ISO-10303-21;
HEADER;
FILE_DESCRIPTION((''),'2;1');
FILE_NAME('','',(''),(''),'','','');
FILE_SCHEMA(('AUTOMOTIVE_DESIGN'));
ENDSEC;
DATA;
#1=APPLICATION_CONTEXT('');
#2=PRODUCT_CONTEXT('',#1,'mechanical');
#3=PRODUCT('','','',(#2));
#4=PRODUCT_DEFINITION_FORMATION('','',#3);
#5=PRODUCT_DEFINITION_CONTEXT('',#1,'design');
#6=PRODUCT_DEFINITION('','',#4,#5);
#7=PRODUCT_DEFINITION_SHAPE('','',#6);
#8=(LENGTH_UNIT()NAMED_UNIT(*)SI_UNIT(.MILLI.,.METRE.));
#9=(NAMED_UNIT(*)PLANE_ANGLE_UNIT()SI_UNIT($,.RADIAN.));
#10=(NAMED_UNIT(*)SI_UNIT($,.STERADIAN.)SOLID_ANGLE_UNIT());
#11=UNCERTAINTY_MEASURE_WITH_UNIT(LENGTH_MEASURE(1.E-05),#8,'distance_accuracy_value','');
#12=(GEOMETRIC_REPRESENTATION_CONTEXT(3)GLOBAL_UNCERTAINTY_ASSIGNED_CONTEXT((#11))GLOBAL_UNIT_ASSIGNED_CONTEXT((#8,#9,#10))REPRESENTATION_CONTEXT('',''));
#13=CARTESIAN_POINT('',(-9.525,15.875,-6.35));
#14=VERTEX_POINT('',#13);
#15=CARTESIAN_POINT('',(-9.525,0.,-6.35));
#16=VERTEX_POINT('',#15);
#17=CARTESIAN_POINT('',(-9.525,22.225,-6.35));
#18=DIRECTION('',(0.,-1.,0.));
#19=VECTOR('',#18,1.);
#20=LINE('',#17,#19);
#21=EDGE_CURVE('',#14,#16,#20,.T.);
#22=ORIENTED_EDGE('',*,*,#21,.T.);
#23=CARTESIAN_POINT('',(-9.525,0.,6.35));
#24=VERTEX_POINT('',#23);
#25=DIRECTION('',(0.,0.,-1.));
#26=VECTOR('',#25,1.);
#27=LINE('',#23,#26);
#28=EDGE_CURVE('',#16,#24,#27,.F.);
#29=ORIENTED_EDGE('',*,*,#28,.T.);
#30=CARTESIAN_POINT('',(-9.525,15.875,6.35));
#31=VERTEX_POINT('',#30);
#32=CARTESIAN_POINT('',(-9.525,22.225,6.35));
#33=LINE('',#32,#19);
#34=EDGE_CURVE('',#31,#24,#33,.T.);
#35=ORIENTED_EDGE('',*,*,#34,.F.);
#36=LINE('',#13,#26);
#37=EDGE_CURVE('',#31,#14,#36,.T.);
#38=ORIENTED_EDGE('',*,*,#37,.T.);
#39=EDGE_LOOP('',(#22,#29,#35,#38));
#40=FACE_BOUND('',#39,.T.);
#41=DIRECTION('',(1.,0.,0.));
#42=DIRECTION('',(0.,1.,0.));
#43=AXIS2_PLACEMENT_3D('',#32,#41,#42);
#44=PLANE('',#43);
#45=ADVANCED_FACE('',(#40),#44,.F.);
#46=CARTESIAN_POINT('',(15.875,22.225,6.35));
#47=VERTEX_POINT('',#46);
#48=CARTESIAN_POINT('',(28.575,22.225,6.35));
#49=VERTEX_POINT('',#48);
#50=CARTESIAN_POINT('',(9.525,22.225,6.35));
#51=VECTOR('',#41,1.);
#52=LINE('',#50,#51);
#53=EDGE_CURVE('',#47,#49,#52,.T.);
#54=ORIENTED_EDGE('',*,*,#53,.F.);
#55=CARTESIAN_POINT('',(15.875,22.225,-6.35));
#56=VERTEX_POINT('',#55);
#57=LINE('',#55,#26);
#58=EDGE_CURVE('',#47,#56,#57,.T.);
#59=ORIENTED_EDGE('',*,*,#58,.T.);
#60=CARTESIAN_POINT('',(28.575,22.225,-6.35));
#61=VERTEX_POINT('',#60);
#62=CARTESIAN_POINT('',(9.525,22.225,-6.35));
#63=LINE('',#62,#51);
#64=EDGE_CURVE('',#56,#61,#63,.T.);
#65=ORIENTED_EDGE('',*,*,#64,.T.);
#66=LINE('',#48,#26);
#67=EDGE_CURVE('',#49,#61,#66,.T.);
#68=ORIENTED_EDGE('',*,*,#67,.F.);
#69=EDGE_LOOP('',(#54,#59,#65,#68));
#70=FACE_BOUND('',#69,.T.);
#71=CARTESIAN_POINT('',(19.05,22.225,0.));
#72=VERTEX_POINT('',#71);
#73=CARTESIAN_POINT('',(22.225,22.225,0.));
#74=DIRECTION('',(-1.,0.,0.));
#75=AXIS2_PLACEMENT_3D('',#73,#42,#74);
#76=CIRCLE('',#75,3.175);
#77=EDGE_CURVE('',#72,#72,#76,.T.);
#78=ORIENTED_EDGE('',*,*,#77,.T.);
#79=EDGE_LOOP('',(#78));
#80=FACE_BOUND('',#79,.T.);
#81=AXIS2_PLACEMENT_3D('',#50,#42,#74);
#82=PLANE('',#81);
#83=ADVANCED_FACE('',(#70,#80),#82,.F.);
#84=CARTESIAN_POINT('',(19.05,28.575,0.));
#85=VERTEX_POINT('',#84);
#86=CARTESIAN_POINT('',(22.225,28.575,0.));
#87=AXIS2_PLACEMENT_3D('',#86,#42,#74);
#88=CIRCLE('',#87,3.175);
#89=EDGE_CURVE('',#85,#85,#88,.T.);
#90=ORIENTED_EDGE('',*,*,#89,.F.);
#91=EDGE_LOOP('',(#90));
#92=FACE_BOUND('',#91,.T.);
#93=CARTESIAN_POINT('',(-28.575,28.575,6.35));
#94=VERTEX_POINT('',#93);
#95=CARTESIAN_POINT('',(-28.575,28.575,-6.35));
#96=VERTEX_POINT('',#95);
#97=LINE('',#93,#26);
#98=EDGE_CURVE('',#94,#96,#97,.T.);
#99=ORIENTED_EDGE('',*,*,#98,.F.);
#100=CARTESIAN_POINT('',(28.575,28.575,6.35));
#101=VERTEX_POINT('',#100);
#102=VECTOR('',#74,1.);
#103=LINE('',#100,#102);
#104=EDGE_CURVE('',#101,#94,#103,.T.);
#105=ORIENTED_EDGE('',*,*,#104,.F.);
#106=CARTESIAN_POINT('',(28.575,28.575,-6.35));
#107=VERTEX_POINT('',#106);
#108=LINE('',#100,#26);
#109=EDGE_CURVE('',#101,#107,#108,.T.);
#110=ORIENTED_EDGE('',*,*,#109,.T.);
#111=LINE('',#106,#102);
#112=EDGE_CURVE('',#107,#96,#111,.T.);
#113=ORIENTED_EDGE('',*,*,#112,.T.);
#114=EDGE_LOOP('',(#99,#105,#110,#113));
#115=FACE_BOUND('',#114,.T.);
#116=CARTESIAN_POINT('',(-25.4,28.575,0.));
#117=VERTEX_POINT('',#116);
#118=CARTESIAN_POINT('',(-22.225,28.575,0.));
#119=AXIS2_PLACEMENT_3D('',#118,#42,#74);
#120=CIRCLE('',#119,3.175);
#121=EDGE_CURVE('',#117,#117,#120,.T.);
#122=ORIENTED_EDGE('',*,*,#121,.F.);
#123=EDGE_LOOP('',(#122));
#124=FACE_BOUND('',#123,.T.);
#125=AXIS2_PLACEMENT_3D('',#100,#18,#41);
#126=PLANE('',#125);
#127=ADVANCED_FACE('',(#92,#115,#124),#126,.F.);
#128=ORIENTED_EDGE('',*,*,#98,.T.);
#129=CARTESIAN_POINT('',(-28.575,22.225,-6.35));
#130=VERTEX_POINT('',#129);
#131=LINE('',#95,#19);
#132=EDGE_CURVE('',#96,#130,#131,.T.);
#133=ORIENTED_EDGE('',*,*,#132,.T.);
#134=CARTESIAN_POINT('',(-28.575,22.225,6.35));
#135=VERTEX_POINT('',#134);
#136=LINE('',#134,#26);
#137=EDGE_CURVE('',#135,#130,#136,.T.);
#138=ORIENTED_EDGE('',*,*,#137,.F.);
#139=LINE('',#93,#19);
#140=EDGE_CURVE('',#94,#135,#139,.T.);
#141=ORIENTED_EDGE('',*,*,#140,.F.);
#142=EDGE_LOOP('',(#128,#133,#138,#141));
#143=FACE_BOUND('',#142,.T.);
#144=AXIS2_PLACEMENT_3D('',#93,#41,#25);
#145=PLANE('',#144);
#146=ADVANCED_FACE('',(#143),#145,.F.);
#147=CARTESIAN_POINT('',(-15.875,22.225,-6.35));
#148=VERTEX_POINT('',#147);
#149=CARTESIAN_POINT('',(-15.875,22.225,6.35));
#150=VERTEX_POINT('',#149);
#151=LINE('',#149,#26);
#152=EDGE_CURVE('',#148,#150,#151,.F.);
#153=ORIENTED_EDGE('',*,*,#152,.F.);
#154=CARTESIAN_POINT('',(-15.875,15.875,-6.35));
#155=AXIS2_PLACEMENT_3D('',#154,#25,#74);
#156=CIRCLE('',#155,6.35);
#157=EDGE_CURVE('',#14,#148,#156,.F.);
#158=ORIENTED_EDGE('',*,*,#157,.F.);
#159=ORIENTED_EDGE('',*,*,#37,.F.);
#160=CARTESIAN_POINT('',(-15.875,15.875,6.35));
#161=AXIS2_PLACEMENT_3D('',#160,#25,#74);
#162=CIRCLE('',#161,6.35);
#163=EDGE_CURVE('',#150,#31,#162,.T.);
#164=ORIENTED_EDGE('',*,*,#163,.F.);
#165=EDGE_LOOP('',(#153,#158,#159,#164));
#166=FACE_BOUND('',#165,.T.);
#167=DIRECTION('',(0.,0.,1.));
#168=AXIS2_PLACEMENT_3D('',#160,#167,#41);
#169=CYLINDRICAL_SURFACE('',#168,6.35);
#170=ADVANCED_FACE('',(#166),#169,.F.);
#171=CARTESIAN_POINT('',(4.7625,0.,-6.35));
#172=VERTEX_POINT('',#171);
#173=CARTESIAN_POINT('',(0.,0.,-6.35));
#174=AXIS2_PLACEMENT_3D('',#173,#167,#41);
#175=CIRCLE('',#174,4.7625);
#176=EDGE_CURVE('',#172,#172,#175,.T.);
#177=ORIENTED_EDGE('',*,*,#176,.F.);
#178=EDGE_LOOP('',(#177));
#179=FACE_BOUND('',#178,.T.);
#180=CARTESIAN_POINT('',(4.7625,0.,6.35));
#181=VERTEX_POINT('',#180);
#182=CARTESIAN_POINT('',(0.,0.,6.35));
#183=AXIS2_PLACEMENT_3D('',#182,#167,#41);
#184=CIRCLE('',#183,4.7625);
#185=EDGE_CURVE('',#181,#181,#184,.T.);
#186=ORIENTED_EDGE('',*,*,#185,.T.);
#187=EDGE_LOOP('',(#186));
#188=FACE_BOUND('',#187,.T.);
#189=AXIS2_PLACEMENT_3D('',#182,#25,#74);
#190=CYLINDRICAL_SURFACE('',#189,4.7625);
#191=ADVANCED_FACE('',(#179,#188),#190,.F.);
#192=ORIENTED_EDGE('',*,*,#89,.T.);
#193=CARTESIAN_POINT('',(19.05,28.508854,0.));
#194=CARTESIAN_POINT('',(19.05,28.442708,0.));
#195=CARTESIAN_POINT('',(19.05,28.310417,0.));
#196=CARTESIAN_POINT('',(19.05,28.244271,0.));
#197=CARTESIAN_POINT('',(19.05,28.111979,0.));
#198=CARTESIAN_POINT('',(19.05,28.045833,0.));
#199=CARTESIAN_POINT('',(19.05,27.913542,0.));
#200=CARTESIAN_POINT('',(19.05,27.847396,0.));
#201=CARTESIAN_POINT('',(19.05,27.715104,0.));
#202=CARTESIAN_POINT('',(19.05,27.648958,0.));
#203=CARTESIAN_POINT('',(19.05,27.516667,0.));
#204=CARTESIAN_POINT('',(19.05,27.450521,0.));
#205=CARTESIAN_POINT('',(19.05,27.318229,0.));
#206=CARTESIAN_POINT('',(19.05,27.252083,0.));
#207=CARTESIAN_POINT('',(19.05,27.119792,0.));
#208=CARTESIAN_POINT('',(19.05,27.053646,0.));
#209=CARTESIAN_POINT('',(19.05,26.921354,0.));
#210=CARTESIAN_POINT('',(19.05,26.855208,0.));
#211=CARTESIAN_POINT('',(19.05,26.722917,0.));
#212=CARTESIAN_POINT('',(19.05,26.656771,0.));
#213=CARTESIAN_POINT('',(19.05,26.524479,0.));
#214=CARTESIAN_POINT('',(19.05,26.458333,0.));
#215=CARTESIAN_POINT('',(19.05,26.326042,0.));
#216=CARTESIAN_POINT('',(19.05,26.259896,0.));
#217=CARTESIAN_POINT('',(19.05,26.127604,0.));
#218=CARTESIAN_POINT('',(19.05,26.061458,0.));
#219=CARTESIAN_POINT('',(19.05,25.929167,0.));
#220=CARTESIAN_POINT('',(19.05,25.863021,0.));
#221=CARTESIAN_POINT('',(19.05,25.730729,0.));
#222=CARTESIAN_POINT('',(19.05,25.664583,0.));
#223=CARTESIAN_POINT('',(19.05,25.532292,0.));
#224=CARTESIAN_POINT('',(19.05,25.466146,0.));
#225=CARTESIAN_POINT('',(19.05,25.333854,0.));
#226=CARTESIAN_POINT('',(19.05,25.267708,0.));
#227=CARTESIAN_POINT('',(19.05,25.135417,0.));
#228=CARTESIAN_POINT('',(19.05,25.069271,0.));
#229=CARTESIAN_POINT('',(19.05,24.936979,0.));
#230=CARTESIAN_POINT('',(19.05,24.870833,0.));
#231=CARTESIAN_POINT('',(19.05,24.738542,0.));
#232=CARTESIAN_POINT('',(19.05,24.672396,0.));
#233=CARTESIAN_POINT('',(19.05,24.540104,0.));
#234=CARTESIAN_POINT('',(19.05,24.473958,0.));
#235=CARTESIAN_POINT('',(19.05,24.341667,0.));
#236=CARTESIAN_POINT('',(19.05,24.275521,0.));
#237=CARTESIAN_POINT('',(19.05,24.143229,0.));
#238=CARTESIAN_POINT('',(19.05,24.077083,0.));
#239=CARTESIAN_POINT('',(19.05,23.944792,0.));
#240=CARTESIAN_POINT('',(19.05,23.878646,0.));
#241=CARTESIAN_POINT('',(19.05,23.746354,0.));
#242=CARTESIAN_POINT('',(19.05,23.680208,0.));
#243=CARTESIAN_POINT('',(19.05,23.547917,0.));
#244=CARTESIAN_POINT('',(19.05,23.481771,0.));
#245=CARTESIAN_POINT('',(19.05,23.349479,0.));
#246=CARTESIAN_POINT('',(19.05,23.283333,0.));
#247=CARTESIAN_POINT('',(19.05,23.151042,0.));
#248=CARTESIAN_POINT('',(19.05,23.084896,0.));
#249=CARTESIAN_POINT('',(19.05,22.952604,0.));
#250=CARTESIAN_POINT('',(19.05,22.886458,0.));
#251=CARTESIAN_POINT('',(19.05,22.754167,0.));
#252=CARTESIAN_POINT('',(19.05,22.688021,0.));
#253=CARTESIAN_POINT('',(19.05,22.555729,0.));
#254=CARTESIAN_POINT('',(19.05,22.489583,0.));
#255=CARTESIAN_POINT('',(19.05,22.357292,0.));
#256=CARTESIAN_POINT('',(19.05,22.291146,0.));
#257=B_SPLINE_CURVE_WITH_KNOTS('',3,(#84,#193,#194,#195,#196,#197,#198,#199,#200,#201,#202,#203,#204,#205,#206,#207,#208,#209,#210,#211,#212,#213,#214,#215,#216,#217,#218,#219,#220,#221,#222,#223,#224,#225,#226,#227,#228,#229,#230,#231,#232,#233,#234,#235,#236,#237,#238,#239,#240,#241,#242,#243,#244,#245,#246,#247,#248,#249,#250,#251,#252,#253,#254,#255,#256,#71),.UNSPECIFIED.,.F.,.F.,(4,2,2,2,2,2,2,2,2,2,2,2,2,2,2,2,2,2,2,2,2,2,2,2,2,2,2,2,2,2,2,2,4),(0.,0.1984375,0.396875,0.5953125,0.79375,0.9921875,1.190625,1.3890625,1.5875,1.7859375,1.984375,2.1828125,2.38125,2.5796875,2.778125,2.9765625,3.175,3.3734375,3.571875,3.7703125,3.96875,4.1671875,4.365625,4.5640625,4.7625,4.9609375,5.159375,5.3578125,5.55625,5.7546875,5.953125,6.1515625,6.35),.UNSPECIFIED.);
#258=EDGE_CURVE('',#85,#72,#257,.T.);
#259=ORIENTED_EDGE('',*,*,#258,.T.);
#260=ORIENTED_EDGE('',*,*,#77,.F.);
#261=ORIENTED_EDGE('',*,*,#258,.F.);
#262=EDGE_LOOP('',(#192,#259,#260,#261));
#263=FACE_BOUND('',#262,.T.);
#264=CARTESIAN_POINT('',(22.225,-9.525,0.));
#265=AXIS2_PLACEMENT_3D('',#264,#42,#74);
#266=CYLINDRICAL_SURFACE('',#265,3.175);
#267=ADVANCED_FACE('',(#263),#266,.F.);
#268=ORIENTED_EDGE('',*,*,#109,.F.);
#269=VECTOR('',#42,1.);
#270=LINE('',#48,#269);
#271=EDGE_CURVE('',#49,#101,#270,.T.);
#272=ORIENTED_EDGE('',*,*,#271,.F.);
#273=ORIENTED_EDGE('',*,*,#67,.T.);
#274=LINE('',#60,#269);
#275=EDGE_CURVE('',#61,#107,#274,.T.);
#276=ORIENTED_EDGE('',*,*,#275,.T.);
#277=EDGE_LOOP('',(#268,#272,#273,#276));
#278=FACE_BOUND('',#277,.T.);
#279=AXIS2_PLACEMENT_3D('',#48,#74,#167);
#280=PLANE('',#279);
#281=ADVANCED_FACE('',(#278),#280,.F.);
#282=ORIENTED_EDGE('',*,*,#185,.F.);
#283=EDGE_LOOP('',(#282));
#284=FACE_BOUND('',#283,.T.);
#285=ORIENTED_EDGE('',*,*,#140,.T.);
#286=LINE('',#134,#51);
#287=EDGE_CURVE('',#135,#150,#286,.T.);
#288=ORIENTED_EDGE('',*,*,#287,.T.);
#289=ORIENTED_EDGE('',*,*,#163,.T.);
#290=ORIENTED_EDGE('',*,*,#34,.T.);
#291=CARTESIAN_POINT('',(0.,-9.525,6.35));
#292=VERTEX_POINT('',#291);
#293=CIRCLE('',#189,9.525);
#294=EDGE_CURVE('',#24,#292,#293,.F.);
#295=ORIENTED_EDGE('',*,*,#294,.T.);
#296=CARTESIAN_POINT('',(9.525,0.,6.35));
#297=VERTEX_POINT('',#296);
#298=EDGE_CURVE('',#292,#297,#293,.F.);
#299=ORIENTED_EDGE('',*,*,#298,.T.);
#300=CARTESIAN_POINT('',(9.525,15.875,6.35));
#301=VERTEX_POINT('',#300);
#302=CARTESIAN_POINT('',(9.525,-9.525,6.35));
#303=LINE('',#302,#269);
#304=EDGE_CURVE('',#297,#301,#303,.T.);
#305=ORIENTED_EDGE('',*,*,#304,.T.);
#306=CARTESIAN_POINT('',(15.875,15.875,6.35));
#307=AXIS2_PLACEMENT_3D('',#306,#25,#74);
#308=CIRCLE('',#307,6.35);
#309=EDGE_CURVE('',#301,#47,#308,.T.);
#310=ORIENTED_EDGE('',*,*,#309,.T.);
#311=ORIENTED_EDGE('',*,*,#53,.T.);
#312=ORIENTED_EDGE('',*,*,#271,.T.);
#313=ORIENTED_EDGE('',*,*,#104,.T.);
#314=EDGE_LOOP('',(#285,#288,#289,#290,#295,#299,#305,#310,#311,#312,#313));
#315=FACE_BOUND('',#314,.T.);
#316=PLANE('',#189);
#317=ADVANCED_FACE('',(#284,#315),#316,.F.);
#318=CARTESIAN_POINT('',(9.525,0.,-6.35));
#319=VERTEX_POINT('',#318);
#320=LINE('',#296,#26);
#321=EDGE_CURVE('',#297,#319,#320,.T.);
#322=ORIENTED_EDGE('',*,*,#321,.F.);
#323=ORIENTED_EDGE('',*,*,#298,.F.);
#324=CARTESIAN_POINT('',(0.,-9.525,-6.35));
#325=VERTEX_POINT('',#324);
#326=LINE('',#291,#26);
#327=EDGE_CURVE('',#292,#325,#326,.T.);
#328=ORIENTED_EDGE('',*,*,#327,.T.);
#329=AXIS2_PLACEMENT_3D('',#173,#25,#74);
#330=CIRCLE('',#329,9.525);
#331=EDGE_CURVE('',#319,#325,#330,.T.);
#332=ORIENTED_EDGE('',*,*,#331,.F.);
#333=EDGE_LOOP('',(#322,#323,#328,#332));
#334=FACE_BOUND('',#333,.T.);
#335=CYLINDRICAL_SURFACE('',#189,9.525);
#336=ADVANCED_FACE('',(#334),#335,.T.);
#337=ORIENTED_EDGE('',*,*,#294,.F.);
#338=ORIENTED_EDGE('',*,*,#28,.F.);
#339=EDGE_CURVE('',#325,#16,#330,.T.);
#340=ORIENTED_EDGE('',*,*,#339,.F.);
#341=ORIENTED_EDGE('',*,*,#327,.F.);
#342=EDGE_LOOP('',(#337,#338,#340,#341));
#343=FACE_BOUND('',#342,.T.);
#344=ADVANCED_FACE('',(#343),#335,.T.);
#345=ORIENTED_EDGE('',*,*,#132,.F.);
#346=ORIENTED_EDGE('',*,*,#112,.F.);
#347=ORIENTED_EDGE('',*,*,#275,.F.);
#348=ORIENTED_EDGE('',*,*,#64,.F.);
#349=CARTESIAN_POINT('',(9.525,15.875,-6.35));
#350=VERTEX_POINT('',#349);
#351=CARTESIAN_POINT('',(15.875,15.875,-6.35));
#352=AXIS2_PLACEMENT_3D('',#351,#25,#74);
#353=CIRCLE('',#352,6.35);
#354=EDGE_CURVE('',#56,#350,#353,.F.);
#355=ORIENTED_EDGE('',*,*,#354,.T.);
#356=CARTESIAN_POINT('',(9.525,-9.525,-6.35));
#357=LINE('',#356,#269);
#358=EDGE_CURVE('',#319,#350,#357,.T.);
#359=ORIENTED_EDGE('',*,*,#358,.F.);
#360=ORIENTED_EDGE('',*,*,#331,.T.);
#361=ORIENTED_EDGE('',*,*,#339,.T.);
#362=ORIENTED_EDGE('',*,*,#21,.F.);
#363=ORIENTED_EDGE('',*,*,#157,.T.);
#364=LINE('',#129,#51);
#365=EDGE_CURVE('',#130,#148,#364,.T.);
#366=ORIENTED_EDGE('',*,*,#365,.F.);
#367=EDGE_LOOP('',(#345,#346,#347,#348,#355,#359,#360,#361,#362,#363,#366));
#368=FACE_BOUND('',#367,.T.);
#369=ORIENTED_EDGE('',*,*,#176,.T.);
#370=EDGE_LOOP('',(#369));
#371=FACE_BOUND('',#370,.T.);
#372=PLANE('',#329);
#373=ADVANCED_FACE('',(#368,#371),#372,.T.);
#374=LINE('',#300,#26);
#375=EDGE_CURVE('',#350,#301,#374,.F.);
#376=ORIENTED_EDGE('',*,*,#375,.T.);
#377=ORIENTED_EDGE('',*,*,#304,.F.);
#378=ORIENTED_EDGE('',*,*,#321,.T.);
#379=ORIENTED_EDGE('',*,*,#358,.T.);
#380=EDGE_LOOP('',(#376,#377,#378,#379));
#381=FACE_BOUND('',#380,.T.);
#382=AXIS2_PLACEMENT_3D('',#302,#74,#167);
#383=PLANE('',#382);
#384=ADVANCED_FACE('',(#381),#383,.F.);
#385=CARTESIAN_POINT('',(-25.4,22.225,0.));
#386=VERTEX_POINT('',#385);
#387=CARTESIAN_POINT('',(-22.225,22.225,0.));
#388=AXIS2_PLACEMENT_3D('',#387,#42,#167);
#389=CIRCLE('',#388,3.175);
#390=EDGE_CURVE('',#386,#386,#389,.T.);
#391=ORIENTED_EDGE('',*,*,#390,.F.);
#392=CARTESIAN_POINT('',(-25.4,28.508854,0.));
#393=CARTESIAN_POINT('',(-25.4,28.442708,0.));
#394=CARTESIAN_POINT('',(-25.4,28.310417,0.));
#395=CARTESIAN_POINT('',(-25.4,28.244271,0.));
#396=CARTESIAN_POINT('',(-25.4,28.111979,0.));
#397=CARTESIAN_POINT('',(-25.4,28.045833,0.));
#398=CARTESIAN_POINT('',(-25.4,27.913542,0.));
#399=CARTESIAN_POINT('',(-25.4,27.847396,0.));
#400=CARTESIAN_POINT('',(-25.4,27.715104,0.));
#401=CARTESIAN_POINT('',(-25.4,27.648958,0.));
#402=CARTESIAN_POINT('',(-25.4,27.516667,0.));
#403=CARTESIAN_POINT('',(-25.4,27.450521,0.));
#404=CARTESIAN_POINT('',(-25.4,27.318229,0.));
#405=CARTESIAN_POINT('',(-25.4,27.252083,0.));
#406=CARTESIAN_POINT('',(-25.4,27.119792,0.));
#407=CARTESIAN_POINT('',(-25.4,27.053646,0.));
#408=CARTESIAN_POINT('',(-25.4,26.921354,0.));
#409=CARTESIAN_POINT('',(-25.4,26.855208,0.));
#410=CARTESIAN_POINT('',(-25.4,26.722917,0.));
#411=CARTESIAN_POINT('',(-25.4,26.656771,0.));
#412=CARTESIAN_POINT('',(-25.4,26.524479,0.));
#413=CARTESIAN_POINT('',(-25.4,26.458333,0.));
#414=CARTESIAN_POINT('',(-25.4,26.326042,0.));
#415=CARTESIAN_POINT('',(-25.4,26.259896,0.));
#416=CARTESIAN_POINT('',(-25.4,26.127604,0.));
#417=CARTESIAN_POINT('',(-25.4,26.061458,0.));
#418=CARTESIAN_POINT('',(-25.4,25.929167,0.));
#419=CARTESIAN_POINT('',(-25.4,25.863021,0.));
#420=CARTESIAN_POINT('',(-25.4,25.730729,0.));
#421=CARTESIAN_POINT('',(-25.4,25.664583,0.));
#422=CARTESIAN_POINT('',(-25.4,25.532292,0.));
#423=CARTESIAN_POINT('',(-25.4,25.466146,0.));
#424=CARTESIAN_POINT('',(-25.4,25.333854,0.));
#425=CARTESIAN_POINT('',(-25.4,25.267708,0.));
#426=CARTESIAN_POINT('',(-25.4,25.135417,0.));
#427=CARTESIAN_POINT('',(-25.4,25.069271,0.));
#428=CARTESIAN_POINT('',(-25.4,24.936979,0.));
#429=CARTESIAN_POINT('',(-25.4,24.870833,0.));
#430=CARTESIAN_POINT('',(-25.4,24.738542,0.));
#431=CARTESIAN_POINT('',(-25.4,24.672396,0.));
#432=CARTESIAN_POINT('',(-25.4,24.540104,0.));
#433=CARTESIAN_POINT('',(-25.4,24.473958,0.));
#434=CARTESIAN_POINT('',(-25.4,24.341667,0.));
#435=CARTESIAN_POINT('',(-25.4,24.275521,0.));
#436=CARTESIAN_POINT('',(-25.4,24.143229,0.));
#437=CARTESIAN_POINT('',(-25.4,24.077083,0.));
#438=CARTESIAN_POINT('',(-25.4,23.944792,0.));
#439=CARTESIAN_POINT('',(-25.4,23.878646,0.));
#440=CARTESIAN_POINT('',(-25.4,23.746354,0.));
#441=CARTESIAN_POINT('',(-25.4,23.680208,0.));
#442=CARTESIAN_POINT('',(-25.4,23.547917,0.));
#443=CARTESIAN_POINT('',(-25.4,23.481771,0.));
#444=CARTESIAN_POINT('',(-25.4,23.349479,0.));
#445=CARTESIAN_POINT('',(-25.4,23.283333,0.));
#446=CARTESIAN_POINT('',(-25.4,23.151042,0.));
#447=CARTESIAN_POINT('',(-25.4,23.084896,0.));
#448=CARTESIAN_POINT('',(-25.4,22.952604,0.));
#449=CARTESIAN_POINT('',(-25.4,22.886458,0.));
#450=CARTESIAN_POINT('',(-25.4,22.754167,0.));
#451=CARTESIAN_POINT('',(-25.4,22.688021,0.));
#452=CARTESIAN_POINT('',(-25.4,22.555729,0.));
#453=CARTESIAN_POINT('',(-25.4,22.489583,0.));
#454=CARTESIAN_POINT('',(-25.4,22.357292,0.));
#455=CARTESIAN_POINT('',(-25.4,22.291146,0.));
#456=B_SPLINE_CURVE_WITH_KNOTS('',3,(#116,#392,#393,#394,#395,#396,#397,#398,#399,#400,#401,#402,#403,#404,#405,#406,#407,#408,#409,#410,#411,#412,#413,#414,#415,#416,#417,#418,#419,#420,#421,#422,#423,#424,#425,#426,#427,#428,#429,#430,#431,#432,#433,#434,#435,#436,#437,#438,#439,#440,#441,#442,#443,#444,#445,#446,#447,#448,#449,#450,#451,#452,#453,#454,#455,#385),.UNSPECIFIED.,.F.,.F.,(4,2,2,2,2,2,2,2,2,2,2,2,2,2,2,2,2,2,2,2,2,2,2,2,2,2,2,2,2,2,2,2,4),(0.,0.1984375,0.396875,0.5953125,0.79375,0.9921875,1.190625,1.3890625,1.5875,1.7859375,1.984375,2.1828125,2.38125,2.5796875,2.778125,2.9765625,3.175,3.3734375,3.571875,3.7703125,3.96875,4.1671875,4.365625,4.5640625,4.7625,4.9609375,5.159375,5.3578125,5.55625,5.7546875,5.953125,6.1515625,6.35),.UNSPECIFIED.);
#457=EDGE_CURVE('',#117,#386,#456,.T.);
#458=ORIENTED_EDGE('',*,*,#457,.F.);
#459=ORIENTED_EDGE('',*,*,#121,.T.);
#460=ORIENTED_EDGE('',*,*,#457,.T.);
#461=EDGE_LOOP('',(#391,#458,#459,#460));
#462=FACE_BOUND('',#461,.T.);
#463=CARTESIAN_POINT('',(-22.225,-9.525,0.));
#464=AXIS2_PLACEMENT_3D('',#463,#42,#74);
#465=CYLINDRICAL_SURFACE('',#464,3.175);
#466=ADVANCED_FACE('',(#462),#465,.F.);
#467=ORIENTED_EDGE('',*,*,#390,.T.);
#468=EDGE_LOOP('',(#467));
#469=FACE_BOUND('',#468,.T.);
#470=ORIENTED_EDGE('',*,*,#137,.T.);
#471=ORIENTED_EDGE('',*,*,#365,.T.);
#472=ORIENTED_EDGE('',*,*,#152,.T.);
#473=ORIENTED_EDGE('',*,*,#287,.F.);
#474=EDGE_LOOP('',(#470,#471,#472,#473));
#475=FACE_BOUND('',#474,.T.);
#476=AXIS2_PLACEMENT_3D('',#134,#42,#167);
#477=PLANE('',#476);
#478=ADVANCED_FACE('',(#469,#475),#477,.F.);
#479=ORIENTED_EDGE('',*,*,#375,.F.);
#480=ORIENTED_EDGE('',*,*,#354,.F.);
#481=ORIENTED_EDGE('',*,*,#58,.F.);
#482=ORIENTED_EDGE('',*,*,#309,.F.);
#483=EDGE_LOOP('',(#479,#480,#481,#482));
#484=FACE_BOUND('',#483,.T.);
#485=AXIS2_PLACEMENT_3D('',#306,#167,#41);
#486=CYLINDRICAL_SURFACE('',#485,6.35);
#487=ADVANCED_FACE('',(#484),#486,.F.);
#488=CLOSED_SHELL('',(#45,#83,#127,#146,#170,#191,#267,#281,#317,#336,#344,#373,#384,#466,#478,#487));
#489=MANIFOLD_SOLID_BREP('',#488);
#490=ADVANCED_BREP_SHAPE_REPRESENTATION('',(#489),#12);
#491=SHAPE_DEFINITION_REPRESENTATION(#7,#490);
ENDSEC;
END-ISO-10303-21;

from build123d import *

# Parameters (mm, degrees)
SKETCH1_R           = 4.7625
BOSS_EXTRUDE1_DEPTH = 6.35
FILLET1_R           = 6.35
FILLET2_R           = 9.525
SKETCH3_R           = 3.175
CUT_EXTRUDE2_DEPTH  = 49.046468393


with BuildPart() as part:
    # Sketch1 → Boss-Extrude1 (new, symmetric)
    with BuildSketch(Plane.XY):
        Polygon((-9.525, 22.225), (-9.525, -9.525), (9.525, -9.525), (9.525, 22.225), (28.575, 22.225), (28.575, 28.575), (-28.575, 28.575), (-28.575, 22.225), align=None)
        Circle(SKETCH1_R, mode=Mode.SUBTRACT)
    extrude(amount=BOSS_EXTRUDE1_DEPTH, both=True)

    # Fillet1
    fillet1_edges = [part.edges().sort_by_distance(p)[0] for p in [
        (9.525, 22.225, 0),
        (-9.525, 22.225, 0),
    ]]
    fillet(fillet1_edges, radius=FILLET1_R)

    # Fillet2
    fillet2_edges = [part.edges().sort_by_distance(p)[0] for p in [
        (9.525, -9.525, 0),
        (-9.525, -9.525, 0),
    ]]
    fillet(fillet2_edges, radius=FILLET2_R - 0.0001)  # a hair under: the kernel refuses the full size

    # Sketch3 → Cut-Extrude2 (cut, through all)
    with BuildSketch(Plane(origin=(0, 28.575, 0), x_dir=(1, 0, 0), z_dir=(0, 1, 0))):
        with Locations(Location((-22.225, 0, 0), (0, 0, 180))):
            Circle(SKETCH3_R)
        with Locations(Location((22.225, 0, 0), (0, 0, 180))):
            Circle(SKETCH3_R)
    extrude(amount=-CUT_EXTRUDE2_DEPTH, mode=Mode.SUBTRACT)


solid = part.part
